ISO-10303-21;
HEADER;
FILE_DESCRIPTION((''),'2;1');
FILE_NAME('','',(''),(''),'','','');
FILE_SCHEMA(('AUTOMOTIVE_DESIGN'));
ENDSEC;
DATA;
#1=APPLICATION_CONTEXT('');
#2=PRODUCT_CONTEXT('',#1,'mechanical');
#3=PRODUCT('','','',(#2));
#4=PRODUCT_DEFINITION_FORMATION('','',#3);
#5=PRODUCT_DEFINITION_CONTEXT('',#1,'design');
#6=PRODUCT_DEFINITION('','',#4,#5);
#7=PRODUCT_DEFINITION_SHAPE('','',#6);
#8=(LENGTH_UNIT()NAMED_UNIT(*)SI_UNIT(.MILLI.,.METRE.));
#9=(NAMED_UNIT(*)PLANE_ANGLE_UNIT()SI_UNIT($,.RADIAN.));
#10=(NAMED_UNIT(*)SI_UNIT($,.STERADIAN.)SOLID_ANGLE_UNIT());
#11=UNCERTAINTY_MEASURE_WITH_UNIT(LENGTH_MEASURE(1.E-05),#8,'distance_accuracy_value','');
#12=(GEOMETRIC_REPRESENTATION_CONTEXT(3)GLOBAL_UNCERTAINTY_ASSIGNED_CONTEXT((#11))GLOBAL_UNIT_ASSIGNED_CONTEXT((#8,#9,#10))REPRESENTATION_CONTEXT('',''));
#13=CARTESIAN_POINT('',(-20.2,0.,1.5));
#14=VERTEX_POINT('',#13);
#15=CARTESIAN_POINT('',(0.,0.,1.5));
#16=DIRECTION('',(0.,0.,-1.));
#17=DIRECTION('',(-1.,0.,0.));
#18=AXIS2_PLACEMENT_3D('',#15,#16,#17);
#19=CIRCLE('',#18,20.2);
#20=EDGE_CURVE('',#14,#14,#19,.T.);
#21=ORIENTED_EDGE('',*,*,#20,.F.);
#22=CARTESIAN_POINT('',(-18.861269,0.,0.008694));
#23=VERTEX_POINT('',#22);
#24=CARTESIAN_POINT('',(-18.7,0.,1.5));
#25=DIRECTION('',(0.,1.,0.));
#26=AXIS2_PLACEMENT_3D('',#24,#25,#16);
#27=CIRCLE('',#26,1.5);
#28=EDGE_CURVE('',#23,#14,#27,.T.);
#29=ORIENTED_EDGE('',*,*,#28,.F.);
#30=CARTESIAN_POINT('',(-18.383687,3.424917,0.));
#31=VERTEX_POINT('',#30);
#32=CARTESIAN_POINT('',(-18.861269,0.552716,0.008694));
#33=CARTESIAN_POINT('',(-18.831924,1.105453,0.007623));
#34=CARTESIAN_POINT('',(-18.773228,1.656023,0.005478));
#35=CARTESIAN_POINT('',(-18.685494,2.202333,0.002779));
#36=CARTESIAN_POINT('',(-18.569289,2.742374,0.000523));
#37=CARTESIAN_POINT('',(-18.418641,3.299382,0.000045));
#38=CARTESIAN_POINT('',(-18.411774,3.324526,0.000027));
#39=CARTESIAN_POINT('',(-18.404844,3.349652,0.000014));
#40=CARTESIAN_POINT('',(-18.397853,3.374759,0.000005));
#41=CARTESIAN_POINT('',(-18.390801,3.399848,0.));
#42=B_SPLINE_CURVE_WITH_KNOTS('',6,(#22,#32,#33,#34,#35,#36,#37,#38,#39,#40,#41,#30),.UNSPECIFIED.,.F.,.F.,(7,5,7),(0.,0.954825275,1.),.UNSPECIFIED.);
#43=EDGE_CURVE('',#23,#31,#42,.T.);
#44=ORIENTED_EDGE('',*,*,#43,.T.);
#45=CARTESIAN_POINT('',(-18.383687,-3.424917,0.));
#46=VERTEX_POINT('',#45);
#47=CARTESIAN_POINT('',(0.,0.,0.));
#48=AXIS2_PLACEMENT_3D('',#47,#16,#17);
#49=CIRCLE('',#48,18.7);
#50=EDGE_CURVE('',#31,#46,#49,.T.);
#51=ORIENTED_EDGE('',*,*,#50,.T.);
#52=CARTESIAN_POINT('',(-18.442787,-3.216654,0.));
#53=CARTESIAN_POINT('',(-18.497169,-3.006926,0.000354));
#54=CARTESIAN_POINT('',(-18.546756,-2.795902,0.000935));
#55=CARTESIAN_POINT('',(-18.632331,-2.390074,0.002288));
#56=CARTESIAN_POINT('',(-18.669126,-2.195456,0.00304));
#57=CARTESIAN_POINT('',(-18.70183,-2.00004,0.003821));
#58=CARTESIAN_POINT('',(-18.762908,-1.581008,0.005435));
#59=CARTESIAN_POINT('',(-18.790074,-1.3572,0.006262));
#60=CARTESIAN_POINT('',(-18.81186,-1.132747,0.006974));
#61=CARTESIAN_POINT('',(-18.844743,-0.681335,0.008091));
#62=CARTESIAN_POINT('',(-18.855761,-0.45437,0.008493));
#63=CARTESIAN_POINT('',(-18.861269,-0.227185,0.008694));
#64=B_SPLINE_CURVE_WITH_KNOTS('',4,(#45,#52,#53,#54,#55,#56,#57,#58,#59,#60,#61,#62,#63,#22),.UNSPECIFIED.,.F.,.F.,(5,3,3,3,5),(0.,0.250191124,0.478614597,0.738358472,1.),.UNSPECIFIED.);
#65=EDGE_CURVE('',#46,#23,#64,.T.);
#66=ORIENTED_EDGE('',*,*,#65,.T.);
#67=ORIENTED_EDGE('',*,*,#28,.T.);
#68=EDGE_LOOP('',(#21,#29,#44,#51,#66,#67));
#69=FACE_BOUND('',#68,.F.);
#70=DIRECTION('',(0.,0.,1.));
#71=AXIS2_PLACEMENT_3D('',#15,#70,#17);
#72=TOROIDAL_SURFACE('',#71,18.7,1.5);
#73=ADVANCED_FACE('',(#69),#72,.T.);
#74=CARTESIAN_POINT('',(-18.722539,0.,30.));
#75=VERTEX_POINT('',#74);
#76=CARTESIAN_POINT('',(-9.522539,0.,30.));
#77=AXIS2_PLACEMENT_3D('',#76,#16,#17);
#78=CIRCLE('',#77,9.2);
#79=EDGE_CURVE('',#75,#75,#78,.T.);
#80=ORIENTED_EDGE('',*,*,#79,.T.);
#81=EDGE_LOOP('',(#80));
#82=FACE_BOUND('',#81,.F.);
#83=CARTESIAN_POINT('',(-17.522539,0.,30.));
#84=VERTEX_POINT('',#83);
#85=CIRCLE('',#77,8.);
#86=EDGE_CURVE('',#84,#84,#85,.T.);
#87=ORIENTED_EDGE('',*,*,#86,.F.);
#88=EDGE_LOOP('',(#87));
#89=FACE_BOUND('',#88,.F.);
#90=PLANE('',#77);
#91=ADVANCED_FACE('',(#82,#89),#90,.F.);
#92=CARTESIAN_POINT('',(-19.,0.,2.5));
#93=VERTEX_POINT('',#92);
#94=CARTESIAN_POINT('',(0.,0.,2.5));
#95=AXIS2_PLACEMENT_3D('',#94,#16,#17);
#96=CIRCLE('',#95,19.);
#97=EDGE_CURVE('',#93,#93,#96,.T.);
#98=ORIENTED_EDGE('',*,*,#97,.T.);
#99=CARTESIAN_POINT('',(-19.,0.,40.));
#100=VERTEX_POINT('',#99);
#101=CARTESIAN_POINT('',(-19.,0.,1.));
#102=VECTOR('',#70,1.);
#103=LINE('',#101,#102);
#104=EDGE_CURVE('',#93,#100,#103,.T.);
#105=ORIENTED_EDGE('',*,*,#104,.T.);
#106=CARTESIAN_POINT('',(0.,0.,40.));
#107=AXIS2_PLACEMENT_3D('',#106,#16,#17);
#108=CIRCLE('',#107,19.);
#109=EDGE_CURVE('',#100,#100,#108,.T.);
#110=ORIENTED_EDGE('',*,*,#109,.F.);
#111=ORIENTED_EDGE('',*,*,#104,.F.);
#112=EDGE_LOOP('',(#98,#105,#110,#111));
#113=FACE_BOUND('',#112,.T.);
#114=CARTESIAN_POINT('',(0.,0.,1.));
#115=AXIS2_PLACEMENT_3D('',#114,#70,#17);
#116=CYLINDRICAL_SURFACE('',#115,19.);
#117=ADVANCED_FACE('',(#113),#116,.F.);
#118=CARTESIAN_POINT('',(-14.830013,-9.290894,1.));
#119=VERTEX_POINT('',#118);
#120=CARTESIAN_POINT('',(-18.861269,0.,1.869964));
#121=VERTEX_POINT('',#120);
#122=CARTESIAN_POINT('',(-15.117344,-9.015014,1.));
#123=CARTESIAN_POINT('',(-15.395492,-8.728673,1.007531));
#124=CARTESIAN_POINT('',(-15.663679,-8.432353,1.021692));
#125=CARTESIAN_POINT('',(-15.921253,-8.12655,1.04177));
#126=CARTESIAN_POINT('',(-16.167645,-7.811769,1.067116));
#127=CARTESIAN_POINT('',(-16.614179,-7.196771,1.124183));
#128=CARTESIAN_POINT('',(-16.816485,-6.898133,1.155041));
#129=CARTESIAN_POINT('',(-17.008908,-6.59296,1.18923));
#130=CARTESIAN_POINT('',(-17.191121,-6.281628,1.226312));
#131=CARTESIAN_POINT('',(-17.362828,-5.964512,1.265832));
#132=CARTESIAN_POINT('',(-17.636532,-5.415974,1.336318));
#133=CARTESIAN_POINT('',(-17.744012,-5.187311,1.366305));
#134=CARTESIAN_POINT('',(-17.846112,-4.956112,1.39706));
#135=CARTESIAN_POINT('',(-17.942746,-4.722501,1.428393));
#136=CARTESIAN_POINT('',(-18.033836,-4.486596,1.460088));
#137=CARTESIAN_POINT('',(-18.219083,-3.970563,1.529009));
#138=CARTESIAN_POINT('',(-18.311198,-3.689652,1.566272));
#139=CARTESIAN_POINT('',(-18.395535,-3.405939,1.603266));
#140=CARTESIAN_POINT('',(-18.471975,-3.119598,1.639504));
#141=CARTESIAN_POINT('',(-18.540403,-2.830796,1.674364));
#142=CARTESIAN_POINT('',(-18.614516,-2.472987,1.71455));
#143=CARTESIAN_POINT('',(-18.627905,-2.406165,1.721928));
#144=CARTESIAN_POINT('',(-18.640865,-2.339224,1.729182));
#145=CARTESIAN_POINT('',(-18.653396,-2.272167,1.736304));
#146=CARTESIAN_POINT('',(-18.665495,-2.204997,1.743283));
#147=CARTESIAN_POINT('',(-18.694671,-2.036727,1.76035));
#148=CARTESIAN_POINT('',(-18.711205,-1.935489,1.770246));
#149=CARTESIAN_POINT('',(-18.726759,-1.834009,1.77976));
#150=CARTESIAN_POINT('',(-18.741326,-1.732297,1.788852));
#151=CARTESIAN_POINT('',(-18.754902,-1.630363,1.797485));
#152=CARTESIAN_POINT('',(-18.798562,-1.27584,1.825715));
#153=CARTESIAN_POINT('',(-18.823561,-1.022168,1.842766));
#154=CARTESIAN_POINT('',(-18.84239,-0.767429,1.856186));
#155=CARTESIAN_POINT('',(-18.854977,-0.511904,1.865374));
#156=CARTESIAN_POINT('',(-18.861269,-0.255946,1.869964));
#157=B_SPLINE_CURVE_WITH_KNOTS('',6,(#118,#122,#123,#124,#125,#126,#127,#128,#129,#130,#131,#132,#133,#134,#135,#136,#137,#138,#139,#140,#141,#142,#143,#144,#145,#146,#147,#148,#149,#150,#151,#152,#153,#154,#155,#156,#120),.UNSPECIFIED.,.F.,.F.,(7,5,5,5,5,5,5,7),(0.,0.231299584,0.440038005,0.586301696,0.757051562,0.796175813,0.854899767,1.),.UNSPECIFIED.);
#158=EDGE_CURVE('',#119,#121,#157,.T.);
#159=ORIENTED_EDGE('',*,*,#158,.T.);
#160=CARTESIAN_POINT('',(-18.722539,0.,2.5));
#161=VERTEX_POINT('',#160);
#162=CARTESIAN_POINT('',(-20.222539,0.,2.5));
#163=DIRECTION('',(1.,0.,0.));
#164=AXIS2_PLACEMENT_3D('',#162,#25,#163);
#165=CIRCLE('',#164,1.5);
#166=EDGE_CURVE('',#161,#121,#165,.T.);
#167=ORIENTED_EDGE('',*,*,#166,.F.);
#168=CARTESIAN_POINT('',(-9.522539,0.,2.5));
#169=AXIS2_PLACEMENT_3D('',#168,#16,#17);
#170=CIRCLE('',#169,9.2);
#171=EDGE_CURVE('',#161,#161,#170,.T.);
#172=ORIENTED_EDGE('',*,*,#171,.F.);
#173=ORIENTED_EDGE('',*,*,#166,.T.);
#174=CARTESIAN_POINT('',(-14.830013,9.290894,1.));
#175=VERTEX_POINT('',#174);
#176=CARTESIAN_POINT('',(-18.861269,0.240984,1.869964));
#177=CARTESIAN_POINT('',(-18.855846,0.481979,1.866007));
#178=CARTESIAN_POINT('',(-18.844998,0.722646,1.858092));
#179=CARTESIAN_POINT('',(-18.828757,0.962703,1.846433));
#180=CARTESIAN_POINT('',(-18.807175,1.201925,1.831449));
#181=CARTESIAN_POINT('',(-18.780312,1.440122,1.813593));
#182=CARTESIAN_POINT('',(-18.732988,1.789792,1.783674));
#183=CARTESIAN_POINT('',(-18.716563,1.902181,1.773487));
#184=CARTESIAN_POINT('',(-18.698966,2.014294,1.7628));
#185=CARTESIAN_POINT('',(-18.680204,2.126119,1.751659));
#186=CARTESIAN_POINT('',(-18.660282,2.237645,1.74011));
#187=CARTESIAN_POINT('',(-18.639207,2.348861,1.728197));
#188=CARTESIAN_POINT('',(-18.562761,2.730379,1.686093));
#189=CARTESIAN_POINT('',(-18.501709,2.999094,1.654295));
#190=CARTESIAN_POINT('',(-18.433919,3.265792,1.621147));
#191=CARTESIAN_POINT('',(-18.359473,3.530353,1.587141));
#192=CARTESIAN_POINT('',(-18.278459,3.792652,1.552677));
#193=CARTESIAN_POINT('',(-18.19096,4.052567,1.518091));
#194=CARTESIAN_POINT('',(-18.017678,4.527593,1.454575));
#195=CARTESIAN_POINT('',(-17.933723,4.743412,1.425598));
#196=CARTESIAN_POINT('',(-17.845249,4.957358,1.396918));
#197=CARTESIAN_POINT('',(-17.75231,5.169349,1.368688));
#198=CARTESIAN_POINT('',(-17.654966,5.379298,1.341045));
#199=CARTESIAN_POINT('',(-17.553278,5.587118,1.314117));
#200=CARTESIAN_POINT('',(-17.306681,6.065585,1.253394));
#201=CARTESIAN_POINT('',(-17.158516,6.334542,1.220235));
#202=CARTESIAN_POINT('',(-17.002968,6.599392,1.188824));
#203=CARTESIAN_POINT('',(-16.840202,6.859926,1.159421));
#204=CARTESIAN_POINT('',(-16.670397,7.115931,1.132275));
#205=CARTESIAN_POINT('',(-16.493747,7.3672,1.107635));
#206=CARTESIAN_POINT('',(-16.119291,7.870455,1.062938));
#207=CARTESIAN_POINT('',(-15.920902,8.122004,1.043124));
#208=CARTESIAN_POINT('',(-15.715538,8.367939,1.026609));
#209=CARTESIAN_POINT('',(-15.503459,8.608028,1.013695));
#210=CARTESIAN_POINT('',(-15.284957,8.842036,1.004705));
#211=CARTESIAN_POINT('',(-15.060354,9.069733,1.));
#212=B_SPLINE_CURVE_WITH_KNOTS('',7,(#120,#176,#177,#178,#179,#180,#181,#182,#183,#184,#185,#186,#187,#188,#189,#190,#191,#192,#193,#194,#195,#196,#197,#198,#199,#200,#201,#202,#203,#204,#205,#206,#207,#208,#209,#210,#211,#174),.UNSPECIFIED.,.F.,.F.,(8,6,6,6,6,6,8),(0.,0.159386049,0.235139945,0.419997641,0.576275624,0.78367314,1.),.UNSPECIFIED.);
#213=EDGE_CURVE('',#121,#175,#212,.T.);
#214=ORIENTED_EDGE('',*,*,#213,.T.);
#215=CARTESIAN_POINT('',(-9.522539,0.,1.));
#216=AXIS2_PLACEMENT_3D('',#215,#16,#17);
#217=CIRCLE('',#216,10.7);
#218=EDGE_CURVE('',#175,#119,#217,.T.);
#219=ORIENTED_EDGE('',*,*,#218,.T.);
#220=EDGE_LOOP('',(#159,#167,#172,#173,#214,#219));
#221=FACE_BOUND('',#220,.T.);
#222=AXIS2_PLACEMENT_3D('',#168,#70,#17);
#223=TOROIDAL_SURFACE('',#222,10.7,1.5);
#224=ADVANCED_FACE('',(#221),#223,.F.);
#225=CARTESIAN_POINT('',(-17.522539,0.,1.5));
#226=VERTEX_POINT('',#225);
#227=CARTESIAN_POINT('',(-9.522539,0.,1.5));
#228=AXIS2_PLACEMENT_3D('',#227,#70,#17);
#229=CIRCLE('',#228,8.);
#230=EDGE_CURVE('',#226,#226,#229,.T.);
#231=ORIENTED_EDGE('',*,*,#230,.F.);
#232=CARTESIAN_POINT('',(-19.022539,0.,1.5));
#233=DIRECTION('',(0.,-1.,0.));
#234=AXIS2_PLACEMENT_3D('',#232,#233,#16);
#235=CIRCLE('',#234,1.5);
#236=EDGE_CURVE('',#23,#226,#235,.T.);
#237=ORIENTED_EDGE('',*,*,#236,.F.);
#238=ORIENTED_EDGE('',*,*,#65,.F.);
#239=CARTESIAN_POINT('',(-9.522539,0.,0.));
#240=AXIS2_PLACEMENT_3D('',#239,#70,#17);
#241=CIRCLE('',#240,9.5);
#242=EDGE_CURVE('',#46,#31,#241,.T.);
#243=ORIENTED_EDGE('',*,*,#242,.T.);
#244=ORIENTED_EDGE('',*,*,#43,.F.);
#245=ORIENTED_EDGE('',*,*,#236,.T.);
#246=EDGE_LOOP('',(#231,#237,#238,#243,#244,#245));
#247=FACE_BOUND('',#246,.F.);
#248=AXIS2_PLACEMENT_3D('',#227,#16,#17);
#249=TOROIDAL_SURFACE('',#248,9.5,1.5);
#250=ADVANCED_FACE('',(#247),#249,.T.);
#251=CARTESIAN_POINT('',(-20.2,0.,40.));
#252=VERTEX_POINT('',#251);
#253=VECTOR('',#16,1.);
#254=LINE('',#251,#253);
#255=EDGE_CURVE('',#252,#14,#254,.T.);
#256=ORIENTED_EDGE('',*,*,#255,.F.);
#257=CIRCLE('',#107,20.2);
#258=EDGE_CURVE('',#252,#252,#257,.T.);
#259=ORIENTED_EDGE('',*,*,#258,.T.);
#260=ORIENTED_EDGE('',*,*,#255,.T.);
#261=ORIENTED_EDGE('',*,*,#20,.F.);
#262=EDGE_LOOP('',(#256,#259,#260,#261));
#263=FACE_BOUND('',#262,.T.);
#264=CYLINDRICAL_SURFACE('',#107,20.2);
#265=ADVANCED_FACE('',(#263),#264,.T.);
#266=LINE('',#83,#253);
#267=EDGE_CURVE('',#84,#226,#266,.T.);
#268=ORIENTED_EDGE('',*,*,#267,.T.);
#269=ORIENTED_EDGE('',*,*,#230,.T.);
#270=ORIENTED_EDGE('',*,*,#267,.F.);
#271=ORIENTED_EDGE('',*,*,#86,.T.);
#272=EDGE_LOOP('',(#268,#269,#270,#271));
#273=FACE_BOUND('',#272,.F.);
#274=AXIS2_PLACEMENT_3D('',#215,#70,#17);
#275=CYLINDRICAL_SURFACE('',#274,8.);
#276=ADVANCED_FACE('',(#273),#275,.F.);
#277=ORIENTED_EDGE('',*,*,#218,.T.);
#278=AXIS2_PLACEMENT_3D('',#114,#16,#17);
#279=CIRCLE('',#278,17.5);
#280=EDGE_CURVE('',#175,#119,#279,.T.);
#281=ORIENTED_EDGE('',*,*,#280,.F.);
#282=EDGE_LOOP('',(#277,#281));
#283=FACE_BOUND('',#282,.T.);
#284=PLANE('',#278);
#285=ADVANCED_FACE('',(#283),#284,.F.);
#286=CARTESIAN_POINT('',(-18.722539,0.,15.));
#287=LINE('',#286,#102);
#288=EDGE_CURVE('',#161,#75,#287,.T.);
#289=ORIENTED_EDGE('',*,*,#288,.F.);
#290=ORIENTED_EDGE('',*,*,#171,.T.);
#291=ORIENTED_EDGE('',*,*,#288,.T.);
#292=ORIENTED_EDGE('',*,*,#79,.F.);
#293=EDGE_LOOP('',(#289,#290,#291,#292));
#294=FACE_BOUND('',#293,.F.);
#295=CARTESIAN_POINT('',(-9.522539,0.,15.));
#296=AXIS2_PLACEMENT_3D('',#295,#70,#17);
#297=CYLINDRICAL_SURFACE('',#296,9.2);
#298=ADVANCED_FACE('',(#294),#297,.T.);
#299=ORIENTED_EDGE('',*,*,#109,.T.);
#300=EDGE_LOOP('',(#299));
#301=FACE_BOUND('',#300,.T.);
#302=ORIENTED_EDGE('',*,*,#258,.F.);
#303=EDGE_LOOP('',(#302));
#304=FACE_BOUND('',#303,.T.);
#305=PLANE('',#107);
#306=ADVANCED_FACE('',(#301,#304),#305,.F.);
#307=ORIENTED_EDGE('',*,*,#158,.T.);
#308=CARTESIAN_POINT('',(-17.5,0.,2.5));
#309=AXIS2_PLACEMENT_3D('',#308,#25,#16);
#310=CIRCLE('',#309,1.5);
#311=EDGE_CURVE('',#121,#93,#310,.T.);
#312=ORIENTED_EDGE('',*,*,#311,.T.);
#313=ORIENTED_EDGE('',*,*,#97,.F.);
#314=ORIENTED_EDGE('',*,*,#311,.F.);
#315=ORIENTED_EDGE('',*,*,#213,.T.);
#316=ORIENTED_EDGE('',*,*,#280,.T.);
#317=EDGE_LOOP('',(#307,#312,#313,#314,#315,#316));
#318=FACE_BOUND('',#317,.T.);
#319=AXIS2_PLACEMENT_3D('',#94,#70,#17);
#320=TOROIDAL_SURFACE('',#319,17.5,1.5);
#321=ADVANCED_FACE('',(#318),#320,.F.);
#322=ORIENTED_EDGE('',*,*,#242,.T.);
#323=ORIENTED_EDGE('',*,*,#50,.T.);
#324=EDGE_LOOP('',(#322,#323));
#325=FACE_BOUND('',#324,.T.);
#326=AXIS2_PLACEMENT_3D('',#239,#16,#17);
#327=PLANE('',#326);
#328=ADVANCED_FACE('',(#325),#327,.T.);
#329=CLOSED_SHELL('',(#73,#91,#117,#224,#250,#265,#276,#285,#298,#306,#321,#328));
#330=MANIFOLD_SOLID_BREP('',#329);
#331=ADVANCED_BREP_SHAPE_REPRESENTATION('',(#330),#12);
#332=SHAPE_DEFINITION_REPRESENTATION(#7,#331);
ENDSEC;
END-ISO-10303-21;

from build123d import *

# Parameters (mm, degrees)
F2_W     = 1.2
F2_H     = 30
F4_DEPTH = 12.5


# Not quite as in the source:
# - a fillet or chamfer that OpenCascade refuses, or shapes differently, is made with other operations: its cross-section is extruded or revolved along the edge and cut away or added


with BuildPart() as f1:
    # F0 (on Front) → F1 (revolve)
    with BuildSketch(Plane.XZ):
        Polygon((-20.2, 0), (0, 0), (0, 1), (-19, 1), (-19, 40), (-20.2, 40), align=None)
    revolve(axis=Axis((0, 0, 0.5), (0, 0, -1)))

    # F2 (on Front) → F3 (revolve)
    with BuildSketch(Plane.XZ):
        with Locations((-18.1225388443, 15)):
            Rectangle(F2_W, F2_H)
    revolve(axis=Axis((-9.5225388443, 0, 9.0516569445), (0, 0, -1)))

    # F4 (cut, symmetric): a face of the model
    f4_faces = [f1.faces().sort_by_distance(p)[0] for p in [
        (-9.5225388443, 0, 1),
    ]]
    extrude(f4_faces, amount=F4_DEPTH, both=True, mode=Mode.SUBTRACT)

    # F5: fillet of radius 1.5 on 4 edges, made by hand

    # F5_s1 → F5_t2 (revolve)
    with BuildSketch(Plane.XZ):
        with BuildLine():
            ThreePointArc((-17.5, 1), (-18.5606601718, 1.4393398282), (-19, 2.5))
            Line((-19, 2.5), (-19.03, 2.5))
            Line((-19.03, 2.5), (-19.03, 0.97))
            Line((-19.03, 0.97), (-17.5, 0.97))
            Line((-17.5, 0.97), (-17.5, 1))
        make_face()
    revolve(axis=Axis((0, 0, 1), (0, 0, -1)))

    # F5_s3 → F5_t4 (revolve)
    with BuildSketch(Plane.XZ):
        with BuildLine():
            ThreePointArc((-18.7225388443, 2.5), (-19.1618786725, 1.4393398282), (-20.2225388443, 1))
            Line((-20.2225388443, 1), (-20.2225388443, 0.97))
            Line((-20.2225388443, 0.97), (-18.6925388443, 0.97))
            Line((-18.6925388443, 0.97), (-18.6925388443, 2.5))
            Line((-18.6925388443, 2.5), (-18.7225388443, 2.5))
        make_face()
    revolve(axis=Axis((-9.5225388443, 0, 1), (0, 0, -1)))

    # F5_s5 → F5_t6 (revolve, cut)
    with BuildSketch(Plane.XZ):
        with BuildLine():
            ThreePointArc((-18.7, 0), (-19.7606601718, 0.4393398282), (-20.2, 1.5))
            Line((-20.2, 1.5), (-20.23, 1.5))
            Line((-20.23, 1.5), (-20.23, -0.03))
            Line((-20.23, -0.03), (-18.7, -0.03))
            Line((-18.7, -0.03), (-18.7, 0))
        make_face()
    revolve(axis=Axis((0, 0, 0), (0, 0, -1)), mode=Mode.SUBTRACT)

    # F5_s7 → F5_t8 (revolve, cut)
    with BuildSketch(Plane.XZ):
        with BuildLine():
            ThreePointArc((-19.0225388443, 0), (-17.9618786725, 0.4393398282), (-17.5225388443, 1.5))
            Line((-17.5225388443, 1.5), (-17.4925388443, 1.5))
            Line((-17.4925388443, 1.5), (-17.4925388443, -0.03))
            Line((-17.4925388443, -0.03), (-19.0225388443, -0.03))
            Line((-19.0225388443, -0.03), (-19.0225388443, 0))
        make_face()
    revolve(axis=Axis((-9.5225388443, 0, 0), (0, 0, 1)), mode=Mode.SUBTRACT)


solid = f1.part
